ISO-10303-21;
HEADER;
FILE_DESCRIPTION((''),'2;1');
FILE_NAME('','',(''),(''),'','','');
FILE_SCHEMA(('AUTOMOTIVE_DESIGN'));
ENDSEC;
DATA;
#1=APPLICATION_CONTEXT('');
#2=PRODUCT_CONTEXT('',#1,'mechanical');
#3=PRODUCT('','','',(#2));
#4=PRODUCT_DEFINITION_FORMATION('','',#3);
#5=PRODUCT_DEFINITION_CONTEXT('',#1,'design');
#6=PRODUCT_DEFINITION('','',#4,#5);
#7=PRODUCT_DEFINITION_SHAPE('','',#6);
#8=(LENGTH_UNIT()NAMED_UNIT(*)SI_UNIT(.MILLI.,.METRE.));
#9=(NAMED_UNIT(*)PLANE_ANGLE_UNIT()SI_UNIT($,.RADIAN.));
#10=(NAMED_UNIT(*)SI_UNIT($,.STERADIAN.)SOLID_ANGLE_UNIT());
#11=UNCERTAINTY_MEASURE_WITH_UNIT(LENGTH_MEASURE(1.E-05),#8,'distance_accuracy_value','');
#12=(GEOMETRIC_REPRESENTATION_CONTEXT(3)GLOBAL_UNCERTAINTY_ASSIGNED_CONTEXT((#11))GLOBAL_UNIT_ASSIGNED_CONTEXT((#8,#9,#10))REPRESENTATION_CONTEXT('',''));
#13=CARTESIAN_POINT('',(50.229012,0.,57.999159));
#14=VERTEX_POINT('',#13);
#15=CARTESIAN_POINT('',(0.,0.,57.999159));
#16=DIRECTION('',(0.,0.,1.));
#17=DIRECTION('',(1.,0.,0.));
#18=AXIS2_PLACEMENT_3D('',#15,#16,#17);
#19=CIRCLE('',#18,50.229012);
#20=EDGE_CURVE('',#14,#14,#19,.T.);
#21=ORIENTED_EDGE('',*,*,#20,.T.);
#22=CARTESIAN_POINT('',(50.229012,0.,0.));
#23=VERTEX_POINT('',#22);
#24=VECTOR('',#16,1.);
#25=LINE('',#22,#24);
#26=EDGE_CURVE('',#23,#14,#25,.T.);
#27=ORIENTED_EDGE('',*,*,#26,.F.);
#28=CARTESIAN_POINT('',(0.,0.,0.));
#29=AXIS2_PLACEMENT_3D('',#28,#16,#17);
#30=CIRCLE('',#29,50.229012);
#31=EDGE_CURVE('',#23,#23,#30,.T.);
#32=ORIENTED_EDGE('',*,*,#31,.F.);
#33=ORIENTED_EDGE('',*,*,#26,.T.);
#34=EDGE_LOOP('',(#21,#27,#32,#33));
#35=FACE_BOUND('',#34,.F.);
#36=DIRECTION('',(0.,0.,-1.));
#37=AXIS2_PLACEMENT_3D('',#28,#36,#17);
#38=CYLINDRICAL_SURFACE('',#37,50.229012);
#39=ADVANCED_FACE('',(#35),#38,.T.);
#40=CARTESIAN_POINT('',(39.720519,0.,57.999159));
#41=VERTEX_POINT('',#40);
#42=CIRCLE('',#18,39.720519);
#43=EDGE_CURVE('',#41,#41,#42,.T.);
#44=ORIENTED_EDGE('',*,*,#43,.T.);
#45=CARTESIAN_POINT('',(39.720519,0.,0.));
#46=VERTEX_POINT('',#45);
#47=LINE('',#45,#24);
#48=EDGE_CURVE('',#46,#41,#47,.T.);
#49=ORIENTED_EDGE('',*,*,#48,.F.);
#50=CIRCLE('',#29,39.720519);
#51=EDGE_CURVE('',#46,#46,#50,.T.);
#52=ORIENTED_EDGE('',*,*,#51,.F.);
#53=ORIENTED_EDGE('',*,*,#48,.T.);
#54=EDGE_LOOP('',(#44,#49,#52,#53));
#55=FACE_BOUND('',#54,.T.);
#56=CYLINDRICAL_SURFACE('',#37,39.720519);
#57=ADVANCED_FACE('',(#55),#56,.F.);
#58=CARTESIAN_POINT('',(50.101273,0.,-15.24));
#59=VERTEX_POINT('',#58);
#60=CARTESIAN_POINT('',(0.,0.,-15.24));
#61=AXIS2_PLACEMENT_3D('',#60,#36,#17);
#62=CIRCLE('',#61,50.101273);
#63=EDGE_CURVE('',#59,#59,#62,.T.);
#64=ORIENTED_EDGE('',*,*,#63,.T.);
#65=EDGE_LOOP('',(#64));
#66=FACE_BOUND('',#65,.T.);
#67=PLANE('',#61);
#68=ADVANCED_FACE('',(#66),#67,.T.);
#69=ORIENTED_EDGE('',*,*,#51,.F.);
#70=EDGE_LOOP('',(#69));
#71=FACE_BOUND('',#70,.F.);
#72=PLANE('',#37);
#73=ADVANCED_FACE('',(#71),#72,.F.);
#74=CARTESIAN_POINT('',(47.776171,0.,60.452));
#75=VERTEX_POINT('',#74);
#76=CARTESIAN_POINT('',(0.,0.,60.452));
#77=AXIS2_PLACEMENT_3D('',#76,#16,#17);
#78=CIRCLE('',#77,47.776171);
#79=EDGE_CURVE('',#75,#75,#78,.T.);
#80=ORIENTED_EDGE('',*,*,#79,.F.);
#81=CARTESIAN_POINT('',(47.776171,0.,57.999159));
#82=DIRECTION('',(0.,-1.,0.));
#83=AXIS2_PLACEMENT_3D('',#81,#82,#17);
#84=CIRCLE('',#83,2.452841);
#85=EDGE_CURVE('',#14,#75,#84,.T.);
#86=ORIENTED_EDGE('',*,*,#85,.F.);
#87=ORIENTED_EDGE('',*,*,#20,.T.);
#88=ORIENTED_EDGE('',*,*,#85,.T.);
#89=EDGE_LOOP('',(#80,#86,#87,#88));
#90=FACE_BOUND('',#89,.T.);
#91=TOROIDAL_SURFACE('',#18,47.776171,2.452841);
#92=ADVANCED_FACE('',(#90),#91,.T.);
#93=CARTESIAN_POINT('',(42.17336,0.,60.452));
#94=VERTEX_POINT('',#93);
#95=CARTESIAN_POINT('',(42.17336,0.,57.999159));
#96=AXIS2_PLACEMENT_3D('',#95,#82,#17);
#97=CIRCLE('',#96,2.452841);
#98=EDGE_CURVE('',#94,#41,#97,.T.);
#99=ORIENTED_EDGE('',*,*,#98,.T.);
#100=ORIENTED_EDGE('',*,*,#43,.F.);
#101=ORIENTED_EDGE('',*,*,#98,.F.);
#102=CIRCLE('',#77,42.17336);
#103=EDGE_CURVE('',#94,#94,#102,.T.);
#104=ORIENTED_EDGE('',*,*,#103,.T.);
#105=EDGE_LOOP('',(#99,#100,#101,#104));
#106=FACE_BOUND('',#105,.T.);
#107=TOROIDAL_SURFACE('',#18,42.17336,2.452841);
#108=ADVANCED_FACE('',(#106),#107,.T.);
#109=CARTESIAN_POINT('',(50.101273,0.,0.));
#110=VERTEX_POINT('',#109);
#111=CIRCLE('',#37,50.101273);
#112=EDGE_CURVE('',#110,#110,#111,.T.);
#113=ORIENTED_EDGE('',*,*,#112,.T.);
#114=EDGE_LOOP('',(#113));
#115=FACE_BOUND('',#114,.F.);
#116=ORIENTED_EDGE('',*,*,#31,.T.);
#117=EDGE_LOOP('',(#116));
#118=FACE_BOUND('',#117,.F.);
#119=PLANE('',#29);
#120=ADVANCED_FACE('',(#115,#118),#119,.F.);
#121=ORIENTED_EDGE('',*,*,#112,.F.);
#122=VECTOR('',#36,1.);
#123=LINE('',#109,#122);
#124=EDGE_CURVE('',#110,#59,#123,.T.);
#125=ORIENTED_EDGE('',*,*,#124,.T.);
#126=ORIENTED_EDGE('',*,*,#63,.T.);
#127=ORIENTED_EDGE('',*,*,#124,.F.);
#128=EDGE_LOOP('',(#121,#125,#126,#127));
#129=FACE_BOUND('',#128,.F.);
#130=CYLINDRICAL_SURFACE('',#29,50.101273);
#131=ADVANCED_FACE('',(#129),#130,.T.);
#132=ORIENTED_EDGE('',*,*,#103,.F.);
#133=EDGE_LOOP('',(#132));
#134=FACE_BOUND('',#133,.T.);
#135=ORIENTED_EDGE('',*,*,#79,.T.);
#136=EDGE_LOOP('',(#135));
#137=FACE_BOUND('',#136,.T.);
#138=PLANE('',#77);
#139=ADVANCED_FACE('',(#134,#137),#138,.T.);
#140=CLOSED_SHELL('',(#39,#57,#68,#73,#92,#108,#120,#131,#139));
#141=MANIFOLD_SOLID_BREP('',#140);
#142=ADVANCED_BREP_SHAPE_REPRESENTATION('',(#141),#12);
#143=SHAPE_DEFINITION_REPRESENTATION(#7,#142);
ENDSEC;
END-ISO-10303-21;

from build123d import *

# Parameters (mm, degrees)
F0_R     = 50.2290121712
F0_R_2   = 39.7205191913
F1_DEPTH = 60.452
F2_R     = 50.1012725797
F3_DEPTH = 15.24
F4_R     = 2.4528409794


# Not quite as in the source:
# - a feature names something its author has since deleted; it is built from what else it names


with BuildPart() as f1:
    # F0 (on Top) → F1 (new body)
    with BuildSketch(Plane.XY):
        Circle(F0_R)
        Circle(F0_R_2, mode=Mode.SUBTRACT)
    extrude(amount=F1_DEPTH)

    # F2 (on face) → F3 (join)
    with BuildSketch(Plane(origin=(0, 0, 0), x_dir=(1, 0, 0), z_dir=(0, 0, -1))):
        Circle(F2_R)
    extrude(amount=F3_DEPTH)

    # F4
    f4_edges = [f1.edges().sort_by_distance(p)[0] for p in [
        (-50.229012, 0, 60.452),
        (-39.720519, 0, 60.452),
    ]]
    fillet(f4_edges, radius=F4_R)


solid = f1.part
